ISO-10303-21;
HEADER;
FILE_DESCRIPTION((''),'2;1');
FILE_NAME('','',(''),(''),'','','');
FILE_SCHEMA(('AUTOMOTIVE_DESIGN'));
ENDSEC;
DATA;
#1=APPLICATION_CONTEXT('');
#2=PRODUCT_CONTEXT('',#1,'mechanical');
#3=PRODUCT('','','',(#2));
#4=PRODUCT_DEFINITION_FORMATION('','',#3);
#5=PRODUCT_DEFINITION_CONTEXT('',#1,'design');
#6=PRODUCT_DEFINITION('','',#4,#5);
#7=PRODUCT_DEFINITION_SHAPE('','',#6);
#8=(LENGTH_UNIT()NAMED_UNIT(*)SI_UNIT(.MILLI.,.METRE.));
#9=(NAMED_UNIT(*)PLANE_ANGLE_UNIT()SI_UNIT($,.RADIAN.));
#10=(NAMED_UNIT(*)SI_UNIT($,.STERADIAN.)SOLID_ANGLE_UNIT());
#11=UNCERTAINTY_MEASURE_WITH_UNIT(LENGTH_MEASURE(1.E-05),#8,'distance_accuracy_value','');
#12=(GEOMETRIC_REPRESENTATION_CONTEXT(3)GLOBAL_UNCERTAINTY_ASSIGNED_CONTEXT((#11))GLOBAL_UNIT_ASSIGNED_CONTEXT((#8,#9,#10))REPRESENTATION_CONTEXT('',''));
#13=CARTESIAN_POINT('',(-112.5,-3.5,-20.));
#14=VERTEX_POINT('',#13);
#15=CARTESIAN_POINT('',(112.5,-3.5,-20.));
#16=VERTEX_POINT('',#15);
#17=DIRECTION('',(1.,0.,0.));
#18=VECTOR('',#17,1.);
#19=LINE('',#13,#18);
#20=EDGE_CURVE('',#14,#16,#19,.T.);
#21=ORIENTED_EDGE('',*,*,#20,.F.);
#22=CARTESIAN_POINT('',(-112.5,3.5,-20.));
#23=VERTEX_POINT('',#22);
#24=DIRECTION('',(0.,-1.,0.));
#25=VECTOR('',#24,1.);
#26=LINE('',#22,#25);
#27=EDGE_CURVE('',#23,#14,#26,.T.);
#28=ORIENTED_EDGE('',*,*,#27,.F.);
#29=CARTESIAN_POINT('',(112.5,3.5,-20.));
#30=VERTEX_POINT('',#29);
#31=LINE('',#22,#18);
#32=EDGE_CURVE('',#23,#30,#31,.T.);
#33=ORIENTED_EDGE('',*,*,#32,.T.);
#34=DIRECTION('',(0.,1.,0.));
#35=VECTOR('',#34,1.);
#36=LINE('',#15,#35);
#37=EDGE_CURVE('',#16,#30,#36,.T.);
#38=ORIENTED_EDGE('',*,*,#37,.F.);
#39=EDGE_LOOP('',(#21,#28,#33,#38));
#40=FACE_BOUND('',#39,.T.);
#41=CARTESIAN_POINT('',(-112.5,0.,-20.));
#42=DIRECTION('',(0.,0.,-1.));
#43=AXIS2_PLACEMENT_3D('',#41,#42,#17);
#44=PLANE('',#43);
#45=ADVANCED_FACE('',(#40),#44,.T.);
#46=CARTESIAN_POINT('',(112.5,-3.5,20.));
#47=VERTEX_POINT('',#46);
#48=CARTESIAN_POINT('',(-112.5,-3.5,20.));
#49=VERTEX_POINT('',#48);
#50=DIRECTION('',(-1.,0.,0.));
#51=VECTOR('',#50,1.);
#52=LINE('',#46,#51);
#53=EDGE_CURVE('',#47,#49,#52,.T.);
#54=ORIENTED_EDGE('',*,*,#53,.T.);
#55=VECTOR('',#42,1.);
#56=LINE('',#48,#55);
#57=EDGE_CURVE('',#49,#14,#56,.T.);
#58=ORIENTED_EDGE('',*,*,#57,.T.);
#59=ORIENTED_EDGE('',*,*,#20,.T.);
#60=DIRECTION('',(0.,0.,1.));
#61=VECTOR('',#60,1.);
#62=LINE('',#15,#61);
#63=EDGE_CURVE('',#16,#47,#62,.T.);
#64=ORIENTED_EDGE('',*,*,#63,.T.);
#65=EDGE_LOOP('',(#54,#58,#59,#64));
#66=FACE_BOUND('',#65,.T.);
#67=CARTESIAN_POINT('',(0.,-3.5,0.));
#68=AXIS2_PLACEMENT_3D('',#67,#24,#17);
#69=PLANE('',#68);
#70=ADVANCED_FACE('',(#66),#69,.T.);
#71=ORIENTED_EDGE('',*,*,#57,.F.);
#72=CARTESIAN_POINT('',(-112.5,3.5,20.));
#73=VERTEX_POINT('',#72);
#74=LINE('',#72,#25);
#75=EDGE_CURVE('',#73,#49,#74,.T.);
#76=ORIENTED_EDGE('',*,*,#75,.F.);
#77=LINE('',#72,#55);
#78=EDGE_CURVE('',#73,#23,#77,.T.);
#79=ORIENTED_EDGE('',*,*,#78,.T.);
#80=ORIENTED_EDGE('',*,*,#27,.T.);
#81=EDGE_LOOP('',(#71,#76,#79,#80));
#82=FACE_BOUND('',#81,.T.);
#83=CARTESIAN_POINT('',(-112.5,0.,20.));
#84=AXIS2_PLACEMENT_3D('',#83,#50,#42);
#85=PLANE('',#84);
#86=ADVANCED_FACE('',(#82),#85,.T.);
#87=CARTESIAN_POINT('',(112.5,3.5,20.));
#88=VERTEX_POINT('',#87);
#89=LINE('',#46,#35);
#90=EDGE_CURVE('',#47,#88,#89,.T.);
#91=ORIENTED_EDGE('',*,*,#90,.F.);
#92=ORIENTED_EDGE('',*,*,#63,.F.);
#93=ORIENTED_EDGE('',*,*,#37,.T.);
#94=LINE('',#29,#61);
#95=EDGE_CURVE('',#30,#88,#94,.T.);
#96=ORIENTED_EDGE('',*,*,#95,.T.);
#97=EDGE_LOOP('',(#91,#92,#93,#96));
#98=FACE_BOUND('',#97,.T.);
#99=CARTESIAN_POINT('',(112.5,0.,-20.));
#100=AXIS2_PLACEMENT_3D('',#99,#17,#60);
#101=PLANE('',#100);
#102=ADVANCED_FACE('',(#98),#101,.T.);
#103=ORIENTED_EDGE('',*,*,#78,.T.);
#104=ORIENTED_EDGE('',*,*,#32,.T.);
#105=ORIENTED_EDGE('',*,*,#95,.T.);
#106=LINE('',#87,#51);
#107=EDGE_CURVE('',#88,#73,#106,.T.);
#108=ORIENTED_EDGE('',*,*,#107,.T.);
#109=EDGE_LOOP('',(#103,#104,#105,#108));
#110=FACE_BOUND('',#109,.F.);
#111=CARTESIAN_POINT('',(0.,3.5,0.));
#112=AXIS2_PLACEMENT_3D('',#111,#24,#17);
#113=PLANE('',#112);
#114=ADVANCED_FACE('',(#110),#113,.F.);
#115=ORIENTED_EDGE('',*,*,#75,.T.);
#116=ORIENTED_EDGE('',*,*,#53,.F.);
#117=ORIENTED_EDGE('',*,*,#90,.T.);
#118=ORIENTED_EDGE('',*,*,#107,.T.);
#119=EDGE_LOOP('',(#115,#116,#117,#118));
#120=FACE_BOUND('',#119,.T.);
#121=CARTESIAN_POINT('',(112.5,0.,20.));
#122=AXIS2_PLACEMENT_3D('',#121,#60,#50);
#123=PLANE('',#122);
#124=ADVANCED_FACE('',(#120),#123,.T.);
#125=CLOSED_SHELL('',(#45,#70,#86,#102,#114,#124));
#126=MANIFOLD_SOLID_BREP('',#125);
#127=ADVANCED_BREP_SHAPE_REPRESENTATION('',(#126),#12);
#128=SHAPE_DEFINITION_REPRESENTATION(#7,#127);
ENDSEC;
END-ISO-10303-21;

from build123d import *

# Parameters (mm, degrees)
F1_DEPTH = 3.5


# Not quite as in the source:
# - ends of sketch curves that miss each other by under 0.0002 mm in the source are joined


with BuildPart() as f1:
    # F0 (on Front) → F1 (new body, symmetric)
    with BuildSketch(Plane.XZ):
        Polygon((112.5, 20), (-4.327e-06, 20), (-112.5, 20), (-112.5, 0), (-112.5, -20), (4.327e-06, -20), (112.5, -20), (112.5, 0), align=None)
    extrude(amount=F1_DEPTH, both=True)


solid = f1.part
